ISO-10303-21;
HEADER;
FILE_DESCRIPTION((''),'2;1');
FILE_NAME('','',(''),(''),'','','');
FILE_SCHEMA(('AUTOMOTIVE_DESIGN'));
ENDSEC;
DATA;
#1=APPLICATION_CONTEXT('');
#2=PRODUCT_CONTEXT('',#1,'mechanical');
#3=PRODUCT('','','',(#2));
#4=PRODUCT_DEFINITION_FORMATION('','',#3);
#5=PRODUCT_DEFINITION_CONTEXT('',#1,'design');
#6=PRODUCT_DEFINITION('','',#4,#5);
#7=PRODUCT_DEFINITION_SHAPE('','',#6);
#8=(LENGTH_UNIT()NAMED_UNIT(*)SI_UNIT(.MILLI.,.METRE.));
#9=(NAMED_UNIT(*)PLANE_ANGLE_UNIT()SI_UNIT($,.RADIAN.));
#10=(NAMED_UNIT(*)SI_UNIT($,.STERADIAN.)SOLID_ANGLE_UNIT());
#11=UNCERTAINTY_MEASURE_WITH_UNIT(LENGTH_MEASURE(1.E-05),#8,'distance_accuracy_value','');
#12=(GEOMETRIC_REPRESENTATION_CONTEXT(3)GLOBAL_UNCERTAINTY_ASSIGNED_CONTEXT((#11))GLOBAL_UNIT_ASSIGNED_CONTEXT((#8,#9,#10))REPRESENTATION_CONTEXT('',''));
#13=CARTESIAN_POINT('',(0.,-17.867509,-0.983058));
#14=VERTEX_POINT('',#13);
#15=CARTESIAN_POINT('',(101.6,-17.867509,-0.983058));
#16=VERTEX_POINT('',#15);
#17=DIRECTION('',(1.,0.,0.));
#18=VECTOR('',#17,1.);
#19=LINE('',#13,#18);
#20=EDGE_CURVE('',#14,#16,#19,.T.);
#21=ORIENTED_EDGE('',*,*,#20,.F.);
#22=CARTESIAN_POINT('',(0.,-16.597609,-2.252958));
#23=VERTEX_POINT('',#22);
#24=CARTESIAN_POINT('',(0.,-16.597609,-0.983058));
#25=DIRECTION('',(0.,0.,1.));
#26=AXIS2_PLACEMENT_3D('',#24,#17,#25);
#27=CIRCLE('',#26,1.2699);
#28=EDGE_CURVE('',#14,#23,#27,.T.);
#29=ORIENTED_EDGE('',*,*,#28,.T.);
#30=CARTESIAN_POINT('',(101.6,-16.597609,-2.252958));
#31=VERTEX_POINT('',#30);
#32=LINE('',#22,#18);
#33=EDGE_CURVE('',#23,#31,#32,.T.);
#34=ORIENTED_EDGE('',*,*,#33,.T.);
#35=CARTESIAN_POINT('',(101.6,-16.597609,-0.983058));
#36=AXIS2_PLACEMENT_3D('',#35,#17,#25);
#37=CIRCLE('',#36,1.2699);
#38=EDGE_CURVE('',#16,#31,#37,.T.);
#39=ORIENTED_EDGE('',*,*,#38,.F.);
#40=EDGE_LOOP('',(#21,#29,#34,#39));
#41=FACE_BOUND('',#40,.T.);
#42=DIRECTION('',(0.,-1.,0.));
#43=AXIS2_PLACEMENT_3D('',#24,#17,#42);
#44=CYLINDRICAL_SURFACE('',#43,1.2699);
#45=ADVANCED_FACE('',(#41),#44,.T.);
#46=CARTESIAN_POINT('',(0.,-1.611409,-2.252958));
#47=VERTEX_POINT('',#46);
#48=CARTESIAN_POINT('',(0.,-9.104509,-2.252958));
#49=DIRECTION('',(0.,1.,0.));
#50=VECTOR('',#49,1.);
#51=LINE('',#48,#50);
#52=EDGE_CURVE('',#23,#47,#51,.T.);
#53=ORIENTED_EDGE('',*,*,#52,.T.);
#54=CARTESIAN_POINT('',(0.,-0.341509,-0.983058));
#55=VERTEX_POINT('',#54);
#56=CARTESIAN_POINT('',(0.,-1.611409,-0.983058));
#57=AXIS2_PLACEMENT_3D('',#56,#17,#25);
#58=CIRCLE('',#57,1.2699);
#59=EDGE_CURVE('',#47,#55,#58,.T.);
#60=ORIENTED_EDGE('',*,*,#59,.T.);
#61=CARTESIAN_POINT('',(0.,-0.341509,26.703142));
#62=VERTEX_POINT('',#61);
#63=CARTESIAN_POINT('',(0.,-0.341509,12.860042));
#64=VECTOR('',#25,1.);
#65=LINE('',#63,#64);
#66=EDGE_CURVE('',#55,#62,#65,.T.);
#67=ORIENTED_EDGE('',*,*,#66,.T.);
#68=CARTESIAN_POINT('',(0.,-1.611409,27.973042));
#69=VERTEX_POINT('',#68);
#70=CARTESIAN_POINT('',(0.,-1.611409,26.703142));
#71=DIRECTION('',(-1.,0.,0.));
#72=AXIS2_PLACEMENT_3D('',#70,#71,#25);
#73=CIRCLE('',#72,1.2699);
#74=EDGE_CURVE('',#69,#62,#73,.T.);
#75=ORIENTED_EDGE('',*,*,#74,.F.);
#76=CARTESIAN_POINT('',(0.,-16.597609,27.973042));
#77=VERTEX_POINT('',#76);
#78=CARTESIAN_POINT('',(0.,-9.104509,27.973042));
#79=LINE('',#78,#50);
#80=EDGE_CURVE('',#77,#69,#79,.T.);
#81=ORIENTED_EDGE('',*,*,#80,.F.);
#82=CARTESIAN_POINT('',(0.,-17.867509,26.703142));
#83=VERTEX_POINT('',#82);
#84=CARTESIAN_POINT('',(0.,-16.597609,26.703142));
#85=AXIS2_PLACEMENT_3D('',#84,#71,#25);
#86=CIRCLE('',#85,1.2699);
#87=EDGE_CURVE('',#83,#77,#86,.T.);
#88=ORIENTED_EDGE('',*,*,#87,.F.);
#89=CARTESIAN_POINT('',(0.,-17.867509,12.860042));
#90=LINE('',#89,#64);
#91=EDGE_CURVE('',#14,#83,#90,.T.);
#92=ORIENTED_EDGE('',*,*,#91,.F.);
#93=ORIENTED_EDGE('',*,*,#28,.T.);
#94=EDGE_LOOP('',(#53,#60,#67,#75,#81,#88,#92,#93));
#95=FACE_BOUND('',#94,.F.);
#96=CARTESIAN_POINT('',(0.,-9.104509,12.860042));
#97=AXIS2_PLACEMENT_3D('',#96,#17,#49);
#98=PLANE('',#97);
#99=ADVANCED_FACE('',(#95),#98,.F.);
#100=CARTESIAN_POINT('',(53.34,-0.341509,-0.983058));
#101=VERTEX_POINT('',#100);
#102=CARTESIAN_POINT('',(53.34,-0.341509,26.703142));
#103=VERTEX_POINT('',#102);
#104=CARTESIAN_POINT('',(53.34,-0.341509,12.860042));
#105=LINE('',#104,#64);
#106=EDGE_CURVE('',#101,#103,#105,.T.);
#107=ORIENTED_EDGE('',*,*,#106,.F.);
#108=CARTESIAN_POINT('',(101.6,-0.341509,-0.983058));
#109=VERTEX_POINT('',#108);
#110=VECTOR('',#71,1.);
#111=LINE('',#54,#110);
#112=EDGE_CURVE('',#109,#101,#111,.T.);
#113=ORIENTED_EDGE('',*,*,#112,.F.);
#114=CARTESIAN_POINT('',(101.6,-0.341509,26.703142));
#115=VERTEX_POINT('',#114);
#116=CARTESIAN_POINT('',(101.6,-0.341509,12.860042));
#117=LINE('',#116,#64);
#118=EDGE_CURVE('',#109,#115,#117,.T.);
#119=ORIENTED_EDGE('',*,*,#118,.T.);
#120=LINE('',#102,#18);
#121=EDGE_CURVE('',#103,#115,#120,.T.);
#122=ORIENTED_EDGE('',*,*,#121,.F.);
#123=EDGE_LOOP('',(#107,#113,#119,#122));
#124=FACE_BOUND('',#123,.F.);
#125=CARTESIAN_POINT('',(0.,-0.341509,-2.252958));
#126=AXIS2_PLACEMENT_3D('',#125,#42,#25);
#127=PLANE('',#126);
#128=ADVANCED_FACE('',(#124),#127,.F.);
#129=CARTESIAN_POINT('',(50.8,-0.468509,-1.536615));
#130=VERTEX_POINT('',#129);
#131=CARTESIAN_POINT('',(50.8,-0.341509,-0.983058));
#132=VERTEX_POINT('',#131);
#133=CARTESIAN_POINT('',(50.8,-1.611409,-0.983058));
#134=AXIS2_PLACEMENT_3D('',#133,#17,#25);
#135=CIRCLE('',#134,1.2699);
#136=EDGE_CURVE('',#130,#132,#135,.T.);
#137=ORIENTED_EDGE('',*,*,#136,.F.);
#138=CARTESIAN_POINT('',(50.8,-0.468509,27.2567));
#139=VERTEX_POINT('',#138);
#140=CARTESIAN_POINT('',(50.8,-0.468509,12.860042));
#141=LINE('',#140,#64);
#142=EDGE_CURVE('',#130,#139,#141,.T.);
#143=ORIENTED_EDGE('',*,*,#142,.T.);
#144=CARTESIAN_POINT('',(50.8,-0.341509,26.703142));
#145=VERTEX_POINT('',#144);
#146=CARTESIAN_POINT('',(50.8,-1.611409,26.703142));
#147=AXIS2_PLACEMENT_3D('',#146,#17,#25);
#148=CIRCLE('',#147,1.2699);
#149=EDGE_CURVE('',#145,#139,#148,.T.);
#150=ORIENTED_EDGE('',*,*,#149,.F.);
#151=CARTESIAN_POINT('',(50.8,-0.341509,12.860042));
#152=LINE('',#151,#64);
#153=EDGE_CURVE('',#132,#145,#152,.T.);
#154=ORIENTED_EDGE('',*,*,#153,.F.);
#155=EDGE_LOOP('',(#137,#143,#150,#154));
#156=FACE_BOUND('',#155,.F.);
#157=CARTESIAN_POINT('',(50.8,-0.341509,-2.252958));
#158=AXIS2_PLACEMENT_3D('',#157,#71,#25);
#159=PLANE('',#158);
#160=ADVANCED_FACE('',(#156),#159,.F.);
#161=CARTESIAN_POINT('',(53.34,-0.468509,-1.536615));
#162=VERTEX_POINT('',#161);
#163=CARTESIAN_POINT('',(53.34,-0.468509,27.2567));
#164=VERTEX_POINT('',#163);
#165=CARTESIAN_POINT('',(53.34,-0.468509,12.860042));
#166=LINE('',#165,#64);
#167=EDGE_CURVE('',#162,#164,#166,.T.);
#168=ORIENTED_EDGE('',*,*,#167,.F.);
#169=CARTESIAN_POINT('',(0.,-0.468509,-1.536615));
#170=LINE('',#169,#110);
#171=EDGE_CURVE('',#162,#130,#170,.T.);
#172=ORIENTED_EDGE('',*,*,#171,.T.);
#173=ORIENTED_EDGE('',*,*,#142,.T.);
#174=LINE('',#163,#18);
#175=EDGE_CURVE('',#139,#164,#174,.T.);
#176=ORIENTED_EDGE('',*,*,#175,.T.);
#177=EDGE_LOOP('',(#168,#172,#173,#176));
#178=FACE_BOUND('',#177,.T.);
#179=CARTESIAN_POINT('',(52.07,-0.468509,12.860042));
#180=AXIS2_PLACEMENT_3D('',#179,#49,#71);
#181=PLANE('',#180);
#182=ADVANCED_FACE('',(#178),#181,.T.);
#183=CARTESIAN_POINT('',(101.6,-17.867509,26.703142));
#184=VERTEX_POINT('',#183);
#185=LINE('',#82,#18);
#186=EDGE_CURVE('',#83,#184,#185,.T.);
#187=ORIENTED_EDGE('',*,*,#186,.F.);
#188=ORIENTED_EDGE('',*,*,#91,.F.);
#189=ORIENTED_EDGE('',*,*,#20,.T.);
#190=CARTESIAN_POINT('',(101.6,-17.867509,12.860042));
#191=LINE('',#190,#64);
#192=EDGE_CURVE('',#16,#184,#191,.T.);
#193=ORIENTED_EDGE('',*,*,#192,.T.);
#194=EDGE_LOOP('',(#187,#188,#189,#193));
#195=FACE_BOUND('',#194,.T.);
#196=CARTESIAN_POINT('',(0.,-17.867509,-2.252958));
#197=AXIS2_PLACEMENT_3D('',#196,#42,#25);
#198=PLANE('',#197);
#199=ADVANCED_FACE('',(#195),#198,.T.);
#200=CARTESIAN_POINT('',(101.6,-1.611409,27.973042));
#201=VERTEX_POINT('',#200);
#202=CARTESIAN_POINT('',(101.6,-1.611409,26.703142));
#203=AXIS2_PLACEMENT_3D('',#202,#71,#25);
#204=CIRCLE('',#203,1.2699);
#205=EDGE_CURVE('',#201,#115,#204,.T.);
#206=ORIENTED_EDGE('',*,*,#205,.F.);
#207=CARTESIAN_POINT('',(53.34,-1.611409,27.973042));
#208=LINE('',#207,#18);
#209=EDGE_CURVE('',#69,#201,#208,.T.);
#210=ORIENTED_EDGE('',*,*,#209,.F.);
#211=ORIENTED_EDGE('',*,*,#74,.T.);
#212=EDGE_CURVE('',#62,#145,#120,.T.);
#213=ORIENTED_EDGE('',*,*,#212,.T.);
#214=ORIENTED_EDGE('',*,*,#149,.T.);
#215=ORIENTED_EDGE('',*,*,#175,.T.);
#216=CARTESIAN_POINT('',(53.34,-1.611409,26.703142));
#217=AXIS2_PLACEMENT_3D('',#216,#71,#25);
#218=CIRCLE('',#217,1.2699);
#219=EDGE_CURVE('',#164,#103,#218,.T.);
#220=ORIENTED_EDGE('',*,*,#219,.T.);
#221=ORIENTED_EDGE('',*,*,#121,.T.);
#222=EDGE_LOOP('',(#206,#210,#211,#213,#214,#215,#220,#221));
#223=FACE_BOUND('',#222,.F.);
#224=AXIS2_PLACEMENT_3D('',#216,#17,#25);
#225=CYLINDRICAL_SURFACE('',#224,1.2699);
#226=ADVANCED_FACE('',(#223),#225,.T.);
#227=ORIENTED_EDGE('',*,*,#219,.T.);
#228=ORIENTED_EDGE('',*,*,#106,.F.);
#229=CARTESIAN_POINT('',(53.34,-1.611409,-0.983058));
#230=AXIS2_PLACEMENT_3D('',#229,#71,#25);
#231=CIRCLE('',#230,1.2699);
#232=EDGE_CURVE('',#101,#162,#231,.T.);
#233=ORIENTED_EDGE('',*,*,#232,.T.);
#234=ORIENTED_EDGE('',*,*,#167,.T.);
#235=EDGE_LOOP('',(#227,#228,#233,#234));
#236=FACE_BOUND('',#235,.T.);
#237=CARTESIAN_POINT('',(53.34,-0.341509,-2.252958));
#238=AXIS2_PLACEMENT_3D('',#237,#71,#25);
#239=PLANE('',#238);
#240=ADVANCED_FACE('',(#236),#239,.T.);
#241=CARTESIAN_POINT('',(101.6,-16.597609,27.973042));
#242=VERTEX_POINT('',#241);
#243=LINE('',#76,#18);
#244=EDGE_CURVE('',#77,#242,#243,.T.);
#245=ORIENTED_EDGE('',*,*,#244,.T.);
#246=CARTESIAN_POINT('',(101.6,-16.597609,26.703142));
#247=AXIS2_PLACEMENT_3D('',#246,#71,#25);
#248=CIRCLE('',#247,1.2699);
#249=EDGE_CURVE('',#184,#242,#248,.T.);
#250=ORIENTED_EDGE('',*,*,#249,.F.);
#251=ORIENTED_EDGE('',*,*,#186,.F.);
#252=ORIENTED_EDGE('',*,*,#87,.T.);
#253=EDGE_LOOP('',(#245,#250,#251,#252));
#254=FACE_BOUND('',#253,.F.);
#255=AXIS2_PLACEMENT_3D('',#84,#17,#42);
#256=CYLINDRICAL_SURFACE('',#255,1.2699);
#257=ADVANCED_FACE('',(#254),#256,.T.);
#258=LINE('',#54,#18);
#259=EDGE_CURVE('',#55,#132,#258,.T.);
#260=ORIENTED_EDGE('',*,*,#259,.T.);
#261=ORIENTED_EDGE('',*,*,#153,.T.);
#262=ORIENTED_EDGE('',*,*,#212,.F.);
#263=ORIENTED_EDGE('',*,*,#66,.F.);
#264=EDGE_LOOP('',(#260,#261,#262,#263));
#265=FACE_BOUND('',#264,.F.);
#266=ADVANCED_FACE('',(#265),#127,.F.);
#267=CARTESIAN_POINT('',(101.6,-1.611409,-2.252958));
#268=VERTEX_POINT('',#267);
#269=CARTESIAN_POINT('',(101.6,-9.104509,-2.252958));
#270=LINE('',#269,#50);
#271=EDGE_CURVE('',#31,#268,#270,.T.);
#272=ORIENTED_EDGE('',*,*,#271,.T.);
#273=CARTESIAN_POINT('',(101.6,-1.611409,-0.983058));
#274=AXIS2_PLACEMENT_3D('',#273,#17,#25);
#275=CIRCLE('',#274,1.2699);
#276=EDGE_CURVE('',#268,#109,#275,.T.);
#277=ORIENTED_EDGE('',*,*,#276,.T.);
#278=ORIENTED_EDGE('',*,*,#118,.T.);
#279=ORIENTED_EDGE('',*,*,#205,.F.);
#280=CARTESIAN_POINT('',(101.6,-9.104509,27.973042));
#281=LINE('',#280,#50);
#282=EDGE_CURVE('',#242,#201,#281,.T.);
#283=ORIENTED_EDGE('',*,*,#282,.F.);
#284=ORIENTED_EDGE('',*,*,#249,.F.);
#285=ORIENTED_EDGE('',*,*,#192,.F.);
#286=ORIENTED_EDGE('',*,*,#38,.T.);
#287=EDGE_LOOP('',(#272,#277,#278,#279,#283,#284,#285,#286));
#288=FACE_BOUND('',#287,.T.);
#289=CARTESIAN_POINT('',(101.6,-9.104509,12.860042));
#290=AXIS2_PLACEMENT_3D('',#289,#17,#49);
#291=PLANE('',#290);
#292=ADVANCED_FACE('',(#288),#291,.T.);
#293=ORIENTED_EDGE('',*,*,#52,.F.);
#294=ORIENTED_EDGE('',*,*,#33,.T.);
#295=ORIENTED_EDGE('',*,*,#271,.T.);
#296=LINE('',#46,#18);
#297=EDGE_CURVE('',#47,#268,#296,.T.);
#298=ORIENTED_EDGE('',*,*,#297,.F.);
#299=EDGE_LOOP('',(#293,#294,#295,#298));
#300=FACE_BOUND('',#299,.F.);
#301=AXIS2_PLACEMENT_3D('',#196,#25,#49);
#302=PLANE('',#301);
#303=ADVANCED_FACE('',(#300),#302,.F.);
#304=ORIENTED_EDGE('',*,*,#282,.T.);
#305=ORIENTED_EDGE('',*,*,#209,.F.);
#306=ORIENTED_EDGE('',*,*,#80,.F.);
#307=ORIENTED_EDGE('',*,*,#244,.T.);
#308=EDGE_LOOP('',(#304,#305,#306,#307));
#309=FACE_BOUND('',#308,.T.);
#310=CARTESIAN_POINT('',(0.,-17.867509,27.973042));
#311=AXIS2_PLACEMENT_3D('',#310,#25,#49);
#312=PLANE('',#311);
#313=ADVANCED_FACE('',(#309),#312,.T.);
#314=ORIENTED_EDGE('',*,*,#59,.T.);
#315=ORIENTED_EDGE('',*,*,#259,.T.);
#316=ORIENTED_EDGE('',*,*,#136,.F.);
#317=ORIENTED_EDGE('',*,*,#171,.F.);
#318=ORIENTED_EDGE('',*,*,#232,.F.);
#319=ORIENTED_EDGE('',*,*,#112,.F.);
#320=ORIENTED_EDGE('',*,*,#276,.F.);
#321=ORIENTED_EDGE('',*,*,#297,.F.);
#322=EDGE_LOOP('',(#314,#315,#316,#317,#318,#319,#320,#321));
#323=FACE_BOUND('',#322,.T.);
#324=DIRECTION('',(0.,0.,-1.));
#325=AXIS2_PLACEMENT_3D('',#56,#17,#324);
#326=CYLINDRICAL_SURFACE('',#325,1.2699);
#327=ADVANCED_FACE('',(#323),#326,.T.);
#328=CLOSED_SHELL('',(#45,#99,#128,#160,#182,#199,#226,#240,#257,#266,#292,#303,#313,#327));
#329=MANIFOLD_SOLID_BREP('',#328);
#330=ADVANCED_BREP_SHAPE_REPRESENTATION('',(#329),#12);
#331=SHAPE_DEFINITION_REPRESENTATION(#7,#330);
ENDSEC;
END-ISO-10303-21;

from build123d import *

# Parameters (mm, degrees)
F0_W     = 17.526
F0_H     = 30.226
F1_DEPTH = 101.6
F2_W     = 2.54
F2_H     = 30.226
F3_DEPTH = 0.127
F4_R     = 1.2699


# Not quite as in the source:
# - a fillet or chamfer is up to 0.001 mm smaller than in the source, because OpenCascade refuses the exact size


with BuildPart() as f1:
    # F0 (on Right) → F1 (new body)
    with BuildSketch(Plane.YZ):
        with Locations((-9.1045090495, 12.8600424648)):
            Rectangle(F0_W, F0_H)
    extrude(amount=F1_DEPTH)

    # F2 (on face) → F3 (cut)
    with BuildSketch(Plane(origin=(0, -0.3415090495, 0), x_dir=(-1, 0, 0), z_dir=(0, 1, 0))):
        with Locations((-52.07, 12.8600424648)):
            Rectangle(F2_W, F2_H)
    extrude(amount=-F3_DEPTH, mode=Mode.SUBTRACT)

    # F4 (radius 1.27 in the source; OpenCascade refuses exactly that, so slightly less here)
    f4_edges = [f1.edges().sort_by_distance(p)[0] for p in [
        (77.47, -0.341509, 27.973042),
        (50.8, -17.867509, 27.973042),
        (50.8, -17.867509, -2.252958),
        (25.4, -0.341509, -2.252958),
    ]]
    fillet(f4_edges, radius=F4_R)


solid = f1.part
